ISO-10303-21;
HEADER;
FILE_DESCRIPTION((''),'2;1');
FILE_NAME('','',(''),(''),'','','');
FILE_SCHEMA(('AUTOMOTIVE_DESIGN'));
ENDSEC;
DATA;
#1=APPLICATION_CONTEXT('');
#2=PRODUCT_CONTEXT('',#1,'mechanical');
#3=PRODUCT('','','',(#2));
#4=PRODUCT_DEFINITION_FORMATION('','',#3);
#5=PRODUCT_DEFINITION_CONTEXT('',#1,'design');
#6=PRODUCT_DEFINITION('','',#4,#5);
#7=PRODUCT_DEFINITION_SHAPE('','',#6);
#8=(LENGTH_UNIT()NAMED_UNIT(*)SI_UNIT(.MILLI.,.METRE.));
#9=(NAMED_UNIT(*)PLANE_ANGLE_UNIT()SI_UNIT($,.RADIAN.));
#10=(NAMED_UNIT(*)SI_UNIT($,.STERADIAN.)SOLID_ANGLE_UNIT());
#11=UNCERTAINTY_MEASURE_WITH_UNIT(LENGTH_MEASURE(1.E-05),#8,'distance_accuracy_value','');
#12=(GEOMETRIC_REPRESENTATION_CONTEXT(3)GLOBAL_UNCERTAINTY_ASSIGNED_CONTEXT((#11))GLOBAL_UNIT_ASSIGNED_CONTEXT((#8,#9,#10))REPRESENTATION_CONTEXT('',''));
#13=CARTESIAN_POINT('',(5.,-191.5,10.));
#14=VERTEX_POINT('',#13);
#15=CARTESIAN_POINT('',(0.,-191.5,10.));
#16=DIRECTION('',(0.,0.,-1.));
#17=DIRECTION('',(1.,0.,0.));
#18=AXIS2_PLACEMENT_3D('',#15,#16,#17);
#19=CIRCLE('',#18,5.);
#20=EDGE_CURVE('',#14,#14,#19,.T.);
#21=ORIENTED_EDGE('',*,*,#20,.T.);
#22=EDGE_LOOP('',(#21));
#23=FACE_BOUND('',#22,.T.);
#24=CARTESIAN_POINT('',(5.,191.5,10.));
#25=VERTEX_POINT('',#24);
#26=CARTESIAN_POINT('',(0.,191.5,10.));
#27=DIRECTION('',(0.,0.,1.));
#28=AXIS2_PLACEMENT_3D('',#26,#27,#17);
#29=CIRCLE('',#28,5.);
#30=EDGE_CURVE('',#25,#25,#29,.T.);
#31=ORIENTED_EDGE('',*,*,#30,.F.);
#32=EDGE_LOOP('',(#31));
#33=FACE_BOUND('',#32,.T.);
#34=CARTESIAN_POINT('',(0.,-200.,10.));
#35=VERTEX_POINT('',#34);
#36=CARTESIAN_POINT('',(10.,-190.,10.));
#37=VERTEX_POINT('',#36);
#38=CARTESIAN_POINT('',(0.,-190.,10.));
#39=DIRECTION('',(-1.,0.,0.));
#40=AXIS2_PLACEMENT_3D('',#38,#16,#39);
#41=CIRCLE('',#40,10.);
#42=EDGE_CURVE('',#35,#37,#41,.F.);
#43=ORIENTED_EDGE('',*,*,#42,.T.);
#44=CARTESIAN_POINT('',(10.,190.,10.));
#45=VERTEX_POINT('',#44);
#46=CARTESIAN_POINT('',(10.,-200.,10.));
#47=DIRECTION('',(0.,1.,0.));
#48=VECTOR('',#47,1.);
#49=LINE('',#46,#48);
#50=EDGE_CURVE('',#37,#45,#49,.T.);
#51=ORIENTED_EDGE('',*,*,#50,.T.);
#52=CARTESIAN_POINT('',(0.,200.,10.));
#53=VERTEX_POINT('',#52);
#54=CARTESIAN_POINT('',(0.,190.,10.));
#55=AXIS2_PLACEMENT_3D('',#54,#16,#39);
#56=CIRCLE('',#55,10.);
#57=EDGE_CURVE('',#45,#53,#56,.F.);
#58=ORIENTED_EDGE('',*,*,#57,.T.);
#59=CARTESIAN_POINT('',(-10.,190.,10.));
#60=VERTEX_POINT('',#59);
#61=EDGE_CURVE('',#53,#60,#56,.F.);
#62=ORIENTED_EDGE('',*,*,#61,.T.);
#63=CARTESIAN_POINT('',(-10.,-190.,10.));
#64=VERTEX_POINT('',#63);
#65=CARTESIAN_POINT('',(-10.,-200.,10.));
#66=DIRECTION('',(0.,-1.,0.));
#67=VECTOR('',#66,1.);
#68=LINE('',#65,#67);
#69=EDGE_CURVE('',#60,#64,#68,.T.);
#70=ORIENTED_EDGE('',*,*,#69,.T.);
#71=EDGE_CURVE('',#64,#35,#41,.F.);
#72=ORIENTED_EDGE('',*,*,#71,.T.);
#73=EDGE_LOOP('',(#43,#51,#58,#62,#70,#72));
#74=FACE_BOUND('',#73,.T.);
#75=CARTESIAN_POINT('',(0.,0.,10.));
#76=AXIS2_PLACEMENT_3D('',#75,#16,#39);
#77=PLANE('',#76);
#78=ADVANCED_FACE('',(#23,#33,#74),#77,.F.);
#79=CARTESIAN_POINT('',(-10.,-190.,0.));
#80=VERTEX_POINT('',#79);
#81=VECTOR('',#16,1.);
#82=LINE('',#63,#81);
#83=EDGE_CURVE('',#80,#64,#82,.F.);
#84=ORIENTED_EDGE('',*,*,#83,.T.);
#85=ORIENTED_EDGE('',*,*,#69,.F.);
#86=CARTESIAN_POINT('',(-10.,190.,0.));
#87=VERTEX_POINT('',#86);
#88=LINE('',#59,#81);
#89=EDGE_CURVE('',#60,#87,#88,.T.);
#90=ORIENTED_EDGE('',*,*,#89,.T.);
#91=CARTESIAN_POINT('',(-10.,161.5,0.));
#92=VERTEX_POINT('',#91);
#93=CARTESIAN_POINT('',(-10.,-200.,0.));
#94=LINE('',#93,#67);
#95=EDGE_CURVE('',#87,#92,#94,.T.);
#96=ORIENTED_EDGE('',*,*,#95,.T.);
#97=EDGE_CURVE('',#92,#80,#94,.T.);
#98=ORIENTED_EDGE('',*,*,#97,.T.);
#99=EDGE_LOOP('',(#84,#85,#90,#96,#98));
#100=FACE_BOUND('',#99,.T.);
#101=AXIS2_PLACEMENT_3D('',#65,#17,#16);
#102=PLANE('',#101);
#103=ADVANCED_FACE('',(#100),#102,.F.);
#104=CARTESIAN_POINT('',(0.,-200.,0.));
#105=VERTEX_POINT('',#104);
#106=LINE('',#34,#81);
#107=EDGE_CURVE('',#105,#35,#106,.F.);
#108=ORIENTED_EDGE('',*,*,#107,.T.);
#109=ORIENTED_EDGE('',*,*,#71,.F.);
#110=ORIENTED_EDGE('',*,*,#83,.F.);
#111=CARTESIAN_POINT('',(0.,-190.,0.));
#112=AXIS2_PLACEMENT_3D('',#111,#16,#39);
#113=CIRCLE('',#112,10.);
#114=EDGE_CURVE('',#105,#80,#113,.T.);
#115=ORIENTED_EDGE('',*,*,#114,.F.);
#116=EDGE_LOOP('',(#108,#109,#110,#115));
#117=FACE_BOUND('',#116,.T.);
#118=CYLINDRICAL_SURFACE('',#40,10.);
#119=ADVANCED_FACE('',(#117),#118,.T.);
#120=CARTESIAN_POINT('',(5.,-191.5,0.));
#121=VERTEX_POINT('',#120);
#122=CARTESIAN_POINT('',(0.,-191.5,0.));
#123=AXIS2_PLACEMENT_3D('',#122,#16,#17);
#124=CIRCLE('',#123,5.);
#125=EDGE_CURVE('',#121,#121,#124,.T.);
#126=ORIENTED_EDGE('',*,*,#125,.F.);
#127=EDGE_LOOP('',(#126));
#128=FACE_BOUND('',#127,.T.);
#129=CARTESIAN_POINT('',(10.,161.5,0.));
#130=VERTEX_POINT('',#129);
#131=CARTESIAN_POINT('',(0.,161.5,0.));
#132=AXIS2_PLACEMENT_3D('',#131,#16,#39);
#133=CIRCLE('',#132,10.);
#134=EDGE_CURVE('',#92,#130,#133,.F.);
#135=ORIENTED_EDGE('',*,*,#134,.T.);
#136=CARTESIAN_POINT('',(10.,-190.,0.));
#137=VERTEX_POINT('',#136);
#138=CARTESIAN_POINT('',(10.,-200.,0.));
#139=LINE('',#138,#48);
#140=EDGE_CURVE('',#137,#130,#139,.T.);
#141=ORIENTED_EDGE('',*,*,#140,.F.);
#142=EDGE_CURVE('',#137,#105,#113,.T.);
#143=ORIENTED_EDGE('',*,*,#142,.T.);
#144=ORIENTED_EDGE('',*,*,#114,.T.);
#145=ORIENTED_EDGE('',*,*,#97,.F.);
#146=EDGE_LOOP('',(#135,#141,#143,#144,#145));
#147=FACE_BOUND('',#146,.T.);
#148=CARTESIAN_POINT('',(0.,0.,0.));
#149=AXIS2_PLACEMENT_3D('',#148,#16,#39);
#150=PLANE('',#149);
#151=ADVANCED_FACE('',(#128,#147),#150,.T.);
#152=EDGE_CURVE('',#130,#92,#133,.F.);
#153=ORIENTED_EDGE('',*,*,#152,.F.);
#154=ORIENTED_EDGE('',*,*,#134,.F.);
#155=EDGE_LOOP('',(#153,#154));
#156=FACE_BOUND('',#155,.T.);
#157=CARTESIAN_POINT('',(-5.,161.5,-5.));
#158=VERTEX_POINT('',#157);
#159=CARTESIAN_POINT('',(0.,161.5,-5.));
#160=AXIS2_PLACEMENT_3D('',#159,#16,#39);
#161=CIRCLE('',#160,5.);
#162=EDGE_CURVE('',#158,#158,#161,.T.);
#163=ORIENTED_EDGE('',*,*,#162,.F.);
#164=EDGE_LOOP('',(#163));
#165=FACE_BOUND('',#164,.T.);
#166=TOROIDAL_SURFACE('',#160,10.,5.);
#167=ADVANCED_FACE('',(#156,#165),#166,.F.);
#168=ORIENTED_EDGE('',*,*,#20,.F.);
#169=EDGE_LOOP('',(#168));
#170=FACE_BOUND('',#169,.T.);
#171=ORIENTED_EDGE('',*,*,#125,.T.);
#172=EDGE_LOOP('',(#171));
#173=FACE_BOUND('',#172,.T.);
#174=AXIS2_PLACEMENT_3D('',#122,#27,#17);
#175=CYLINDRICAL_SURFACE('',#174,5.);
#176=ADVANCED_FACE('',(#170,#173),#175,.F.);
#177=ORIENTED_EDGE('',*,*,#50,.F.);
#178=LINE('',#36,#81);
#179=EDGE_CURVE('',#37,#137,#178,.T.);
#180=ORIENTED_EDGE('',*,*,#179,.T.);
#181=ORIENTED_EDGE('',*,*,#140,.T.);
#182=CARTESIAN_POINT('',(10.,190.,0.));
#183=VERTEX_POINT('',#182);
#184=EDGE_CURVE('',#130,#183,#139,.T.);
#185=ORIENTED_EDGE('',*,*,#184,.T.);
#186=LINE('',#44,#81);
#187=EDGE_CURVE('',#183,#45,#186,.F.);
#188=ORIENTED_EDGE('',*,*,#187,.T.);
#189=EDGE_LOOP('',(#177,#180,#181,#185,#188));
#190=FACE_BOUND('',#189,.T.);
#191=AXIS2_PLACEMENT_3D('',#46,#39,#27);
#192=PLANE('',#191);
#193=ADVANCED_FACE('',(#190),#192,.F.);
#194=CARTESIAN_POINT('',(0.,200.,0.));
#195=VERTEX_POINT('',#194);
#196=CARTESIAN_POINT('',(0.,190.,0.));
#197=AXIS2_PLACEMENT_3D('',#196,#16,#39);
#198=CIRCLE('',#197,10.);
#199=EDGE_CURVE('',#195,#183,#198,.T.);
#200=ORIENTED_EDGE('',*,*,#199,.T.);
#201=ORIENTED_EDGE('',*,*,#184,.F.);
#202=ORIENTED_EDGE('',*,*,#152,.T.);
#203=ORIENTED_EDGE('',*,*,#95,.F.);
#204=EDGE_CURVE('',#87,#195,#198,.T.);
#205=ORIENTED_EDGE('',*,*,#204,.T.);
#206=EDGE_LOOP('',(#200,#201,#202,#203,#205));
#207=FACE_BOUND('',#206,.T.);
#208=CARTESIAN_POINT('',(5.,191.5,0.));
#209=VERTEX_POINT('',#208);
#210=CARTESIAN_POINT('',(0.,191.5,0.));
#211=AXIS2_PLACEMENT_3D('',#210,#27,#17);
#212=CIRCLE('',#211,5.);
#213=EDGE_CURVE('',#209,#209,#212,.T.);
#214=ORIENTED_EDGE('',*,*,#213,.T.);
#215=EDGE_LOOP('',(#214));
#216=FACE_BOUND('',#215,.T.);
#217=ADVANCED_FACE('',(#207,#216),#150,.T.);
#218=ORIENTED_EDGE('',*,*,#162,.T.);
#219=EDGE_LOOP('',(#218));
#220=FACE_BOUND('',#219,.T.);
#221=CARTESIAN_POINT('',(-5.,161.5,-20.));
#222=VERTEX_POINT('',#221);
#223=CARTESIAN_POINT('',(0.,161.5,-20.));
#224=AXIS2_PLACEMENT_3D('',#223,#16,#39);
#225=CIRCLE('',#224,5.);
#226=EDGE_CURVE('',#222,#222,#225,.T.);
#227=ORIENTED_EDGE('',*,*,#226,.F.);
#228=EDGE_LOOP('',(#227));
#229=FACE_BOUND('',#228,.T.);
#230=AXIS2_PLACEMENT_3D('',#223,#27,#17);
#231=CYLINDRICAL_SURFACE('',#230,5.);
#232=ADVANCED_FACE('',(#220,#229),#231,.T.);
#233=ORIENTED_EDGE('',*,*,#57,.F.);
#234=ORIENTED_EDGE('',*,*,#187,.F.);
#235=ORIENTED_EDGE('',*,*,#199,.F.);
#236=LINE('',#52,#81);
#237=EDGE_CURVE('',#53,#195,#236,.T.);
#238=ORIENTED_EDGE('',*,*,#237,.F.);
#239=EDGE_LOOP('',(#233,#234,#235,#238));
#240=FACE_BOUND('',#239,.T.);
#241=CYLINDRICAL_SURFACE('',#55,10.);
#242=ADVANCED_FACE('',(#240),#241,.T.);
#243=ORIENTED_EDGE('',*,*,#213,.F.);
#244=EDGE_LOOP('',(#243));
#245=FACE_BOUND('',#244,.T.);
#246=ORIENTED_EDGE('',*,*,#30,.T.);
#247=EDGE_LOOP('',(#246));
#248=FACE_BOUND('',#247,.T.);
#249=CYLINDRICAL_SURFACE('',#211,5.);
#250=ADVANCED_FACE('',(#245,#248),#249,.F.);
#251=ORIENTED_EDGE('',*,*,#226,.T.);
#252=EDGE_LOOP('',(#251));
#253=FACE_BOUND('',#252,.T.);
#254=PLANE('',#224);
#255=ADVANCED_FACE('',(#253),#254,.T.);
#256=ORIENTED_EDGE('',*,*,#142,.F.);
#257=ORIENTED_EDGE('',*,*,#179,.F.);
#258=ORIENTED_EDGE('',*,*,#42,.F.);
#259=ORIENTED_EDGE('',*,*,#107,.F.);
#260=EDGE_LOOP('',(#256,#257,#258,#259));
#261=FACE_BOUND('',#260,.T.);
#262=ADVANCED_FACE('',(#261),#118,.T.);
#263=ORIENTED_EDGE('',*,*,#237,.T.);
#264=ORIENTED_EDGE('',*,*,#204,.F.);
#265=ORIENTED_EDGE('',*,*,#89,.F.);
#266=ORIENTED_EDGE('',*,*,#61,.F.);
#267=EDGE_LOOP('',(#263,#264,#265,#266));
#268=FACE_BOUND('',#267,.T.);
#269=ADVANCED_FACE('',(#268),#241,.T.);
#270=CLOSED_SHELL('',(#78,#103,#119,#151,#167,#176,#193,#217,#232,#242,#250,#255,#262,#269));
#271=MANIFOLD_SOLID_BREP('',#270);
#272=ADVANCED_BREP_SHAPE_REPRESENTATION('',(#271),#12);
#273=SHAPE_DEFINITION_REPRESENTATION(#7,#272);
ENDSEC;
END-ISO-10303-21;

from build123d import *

# Parameters (mm, degrees)
SKETCH1_W           = 20
SKETCH1_H           = 400
BOSS_EXTRUDE1_DEPTH = 10
FILLET1_R           = 10
SKETCH2_R           = 5
CUT_EXTRUDE1_DEPTH  = 201.499376558
SKETCH3_R           = 5
BOSS_EXTRUDE2_DEPTH = 20
FILLET2_R           = 5


with BuildPart() as part:
    # Sketch1 → Boss-Extrude1 (new body)
    with BuildSketch(Plane.XY):
        Rectangle(SKETCH1_W, SKETCH1_H)
    extrude(amount=BOSS_EXTRUDE1_DEPTH)

    # Fillet1
    fillet1_edges = [part.edges().sort_by_distance(p)[0] for p in [
        (-10, -200, 5),
        (10, -200, 5),
        (-10, 200, 5),
        (10, 200, 5),
    ]]
    fillet(fillet1_edges, radius=FILLET1_R - 0.0001)  # a hair under: the kernel refuses the full size

    # Sketch2 → Cut-Extrude1 (cut, through all)
    with BuildSketch(Plane.XY.offset(10)):
        with Locations((0, 191.5)):
            Circle(SKETCH2_R)
    cut_extrude1 = extrude(amount=-CUT_EXTRUDE1_DEPTH, mode=Mode.SUBTRACT)

    # Mirror1: Cut-Extrude1 across plane
    add(cut_extrude1.mirror(Plane.ZX), mode=Mode.SUBTRACT)

    # Sketch3 → Boss-Extrude2 (add)
    with BuildSketch(Plane(origin=(0, 0, 0), x_dir=(-1, 0, 0), z_dir=(0, 0, -1))):
        with Locations((0, 161.5)):
            Circle(SKETCH3_R)
    extrude(amount=BOSS_EXTRUDE2_DEPTH)

    # Fillet2
    fillet2_edges = [part.edges().sort_by_distance(p)[0] for p in [
        (5, 161.5, 0),
    ]]
    fillet(fillet2_edges, radius=FILLET2_R - 0.0001)  # a hair under: the kernel refuses the full size


solid = part.part
